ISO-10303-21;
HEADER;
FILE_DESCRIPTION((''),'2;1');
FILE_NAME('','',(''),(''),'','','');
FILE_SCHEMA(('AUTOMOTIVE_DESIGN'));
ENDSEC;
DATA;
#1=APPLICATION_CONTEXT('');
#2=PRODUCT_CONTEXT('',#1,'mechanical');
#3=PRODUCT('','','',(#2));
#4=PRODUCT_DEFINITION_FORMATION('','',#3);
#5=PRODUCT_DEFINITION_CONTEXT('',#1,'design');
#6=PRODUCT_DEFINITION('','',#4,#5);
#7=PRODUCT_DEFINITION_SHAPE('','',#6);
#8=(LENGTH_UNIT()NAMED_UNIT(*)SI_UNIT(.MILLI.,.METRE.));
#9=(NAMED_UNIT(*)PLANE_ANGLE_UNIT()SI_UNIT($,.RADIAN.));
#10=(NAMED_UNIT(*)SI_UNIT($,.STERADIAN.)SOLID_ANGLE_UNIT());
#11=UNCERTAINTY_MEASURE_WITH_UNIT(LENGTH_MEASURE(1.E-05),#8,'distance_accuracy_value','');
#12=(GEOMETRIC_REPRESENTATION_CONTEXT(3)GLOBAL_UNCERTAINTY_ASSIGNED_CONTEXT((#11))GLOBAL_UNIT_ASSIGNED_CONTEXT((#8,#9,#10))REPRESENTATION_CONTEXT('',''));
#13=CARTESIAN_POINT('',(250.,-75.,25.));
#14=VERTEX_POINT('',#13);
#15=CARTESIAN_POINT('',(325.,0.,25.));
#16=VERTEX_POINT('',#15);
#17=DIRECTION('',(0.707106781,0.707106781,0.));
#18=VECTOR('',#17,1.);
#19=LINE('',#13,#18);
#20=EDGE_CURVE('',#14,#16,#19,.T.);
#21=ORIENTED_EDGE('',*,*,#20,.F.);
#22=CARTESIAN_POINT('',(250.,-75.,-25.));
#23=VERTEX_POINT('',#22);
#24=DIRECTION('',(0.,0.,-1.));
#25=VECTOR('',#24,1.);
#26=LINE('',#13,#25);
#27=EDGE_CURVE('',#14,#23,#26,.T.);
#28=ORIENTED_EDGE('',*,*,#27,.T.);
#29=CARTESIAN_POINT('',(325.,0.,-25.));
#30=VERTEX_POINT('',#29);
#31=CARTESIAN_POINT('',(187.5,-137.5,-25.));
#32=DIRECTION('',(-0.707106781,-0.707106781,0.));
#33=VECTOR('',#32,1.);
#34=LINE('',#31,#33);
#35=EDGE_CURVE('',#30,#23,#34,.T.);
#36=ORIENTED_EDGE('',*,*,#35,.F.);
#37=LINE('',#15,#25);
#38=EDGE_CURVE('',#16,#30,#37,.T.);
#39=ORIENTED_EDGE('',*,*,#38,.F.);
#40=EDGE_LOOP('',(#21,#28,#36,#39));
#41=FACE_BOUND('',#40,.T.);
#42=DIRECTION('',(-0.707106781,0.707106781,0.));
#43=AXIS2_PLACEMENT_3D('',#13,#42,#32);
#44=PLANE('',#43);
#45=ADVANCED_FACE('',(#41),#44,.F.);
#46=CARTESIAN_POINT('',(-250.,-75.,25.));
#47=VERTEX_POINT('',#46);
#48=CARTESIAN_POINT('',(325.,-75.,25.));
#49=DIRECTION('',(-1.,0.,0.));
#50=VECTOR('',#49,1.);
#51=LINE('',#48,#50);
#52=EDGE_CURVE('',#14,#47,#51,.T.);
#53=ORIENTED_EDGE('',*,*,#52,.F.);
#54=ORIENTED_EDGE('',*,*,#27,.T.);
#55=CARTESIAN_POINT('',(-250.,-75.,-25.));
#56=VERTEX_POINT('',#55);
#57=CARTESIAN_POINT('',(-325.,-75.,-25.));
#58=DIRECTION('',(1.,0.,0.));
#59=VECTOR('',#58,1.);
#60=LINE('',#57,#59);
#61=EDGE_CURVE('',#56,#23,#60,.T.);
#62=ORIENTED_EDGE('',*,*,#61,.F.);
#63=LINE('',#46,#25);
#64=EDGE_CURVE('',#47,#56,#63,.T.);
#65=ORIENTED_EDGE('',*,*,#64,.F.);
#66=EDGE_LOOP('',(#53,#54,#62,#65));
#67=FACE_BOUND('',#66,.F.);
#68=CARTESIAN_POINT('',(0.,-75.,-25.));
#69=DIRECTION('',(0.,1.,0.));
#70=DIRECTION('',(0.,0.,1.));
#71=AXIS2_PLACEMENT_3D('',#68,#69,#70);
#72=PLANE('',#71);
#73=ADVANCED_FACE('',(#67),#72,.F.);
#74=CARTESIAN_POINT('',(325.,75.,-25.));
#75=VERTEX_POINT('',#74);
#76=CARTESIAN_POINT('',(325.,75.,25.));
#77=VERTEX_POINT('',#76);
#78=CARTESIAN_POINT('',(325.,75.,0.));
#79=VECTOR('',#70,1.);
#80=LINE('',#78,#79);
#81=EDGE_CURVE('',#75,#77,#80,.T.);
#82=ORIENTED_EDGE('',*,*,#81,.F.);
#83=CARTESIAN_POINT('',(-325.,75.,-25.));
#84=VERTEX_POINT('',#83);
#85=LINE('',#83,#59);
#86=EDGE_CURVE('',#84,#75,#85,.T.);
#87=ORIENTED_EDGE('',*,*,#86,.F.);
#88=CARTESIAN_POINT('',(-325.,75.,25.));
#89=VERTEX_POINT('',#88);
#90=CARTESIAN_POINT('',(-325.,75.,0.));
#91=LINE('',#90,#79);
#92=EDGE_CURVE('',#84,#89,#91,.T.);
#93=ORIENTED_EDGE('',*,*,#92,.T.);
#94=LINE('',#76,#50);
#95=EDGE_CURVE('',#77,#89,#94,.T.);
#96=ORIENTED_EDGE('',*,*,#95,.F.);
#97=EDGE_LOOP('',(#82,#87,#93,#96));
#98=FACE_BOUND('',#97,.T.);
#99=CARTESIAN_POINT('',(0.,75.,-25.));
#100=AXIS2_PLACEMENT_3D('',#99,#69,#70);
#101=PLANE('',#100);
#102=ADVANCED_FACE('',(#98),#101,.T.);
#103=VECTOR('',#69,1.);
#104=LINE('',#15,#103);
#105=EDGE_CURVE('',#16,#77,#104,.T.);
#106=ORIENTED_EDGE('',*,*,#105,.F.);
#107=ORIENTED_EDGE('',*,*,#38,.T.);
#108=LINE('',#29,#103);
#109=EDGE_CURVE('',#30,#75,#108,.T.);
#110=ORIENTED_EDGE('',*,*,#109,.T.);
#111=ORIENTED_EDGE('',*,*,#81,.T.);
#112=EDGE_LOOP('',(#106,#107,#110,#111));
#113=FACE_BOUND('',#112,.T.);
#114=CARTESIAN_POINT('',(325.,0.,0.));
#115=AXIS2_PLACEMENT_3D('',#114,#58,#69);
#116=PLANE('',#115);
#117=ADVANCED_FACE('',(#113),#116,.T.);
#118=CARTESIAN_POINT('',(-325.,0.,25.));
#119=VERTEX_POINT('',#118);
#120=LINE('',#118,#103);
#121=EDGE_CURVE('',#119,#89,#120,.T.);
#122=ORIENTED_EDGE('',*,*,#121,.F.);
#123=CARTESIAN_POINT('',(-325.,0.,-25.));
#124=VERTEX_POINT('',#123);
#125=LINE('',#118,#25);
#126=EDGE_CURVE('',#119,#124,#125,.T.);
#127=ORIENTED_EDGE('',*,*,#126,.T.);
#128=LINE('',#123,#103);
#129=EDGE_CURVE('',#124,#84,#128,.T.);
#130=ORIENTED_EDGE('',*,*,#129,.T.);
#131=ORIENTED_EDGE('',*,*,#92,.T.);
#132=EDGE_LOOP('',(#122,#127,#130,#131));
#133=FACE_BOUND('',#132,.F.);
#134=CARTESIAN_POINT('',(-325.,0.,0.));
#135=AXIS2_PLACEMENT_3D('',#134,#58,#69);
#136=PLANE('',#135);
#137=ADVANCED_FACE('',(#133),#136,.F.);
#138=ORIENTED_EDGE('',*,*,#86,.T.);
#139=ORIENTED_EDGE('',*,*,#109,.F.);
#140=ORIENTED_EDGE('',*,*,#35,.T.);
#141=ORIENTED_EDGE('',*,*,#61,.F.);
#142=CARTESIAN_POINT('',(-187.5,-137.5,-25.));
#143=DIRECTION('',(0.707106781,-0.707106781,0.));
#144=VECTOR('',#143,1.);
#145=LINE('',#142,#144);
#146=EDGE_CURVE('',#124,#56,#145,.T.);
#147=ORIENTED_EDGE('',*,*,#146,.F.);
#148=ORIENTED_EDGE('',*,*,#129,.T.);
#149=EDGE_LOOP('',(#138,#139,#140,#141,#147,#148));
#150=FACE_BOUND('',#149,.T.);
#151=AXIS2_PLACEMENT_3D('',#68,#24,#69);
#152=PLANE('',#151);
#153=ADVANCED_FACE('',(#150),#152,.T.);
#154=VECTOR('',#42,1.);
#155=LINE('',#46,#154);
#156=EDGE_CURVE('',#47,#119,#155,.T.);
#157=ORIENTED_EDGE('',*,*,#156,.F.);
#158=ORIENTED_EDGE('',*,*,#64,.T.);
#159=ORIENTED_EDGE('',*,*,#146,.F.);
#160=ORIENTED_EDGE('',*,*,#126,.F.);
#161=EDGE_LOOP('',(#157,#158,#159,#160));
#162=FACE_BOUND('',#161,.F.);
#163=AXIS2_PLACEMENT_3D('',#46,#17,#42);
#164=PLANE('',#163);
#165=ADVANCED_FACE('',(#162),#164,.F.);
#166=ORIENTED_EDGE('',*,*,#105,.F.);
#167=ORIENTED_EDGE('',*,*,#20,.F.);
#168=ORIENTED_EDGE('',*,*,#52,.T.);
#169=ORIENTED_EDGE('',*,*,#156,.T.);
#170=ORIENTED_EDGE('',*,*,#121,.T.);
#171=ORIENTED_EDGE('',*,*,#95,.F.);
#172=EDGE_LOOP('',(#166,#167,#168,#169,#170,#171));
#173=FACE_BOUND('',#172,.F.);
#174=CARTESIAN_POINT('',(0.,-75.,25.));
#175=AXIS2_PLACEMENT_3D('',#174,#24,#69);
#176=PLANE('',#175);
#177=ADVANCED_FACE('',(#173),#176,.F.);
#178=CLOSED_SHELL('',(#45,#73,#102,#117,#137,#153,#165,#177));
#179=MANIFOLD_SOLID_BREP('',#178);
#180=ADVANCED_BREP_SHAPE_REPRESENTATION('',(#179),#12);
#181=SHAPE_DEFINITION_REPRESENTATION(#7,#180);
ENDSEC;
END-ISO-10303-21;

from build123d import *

# Parameters (mm, degrees)
F0_W     = 150
F0_H     = 50
F1_DEPTH = 325
F3_DEPTH = 50.001


# Not quite as in the source:
# - a pattern or mirror of a feature is missing from the dataset's text; its kind, count and spacing are read off the source's solid


with BuildPart() as f1:
    # F0 (on Right) → F1 (new body, symmetric)
    with BuildSketch(Plane.YZ):
        Rectangle(F0_W, F0_H)
    extrude(amount=F1_DEPTH, both=True)

    # F2 (on face) → F3 (cut, through all)
    with BuildSketch(Plane.XY.offset(25)):
        Polygon((-250, -75), (-325, 0), (-325, -75), align=None)
    f3 = extrude(amount=-F3_DEPTH, mode=Mode.SUBTRACT)

    # F3_copies: F3 across plane
    add(f3.mirror(Plane(origin=(0, 0, 0), x_dir=(0, 0, 1), z_dir=(1, 0, 0))), mode=Mode.SUBTRACT)


solid = f1.part
